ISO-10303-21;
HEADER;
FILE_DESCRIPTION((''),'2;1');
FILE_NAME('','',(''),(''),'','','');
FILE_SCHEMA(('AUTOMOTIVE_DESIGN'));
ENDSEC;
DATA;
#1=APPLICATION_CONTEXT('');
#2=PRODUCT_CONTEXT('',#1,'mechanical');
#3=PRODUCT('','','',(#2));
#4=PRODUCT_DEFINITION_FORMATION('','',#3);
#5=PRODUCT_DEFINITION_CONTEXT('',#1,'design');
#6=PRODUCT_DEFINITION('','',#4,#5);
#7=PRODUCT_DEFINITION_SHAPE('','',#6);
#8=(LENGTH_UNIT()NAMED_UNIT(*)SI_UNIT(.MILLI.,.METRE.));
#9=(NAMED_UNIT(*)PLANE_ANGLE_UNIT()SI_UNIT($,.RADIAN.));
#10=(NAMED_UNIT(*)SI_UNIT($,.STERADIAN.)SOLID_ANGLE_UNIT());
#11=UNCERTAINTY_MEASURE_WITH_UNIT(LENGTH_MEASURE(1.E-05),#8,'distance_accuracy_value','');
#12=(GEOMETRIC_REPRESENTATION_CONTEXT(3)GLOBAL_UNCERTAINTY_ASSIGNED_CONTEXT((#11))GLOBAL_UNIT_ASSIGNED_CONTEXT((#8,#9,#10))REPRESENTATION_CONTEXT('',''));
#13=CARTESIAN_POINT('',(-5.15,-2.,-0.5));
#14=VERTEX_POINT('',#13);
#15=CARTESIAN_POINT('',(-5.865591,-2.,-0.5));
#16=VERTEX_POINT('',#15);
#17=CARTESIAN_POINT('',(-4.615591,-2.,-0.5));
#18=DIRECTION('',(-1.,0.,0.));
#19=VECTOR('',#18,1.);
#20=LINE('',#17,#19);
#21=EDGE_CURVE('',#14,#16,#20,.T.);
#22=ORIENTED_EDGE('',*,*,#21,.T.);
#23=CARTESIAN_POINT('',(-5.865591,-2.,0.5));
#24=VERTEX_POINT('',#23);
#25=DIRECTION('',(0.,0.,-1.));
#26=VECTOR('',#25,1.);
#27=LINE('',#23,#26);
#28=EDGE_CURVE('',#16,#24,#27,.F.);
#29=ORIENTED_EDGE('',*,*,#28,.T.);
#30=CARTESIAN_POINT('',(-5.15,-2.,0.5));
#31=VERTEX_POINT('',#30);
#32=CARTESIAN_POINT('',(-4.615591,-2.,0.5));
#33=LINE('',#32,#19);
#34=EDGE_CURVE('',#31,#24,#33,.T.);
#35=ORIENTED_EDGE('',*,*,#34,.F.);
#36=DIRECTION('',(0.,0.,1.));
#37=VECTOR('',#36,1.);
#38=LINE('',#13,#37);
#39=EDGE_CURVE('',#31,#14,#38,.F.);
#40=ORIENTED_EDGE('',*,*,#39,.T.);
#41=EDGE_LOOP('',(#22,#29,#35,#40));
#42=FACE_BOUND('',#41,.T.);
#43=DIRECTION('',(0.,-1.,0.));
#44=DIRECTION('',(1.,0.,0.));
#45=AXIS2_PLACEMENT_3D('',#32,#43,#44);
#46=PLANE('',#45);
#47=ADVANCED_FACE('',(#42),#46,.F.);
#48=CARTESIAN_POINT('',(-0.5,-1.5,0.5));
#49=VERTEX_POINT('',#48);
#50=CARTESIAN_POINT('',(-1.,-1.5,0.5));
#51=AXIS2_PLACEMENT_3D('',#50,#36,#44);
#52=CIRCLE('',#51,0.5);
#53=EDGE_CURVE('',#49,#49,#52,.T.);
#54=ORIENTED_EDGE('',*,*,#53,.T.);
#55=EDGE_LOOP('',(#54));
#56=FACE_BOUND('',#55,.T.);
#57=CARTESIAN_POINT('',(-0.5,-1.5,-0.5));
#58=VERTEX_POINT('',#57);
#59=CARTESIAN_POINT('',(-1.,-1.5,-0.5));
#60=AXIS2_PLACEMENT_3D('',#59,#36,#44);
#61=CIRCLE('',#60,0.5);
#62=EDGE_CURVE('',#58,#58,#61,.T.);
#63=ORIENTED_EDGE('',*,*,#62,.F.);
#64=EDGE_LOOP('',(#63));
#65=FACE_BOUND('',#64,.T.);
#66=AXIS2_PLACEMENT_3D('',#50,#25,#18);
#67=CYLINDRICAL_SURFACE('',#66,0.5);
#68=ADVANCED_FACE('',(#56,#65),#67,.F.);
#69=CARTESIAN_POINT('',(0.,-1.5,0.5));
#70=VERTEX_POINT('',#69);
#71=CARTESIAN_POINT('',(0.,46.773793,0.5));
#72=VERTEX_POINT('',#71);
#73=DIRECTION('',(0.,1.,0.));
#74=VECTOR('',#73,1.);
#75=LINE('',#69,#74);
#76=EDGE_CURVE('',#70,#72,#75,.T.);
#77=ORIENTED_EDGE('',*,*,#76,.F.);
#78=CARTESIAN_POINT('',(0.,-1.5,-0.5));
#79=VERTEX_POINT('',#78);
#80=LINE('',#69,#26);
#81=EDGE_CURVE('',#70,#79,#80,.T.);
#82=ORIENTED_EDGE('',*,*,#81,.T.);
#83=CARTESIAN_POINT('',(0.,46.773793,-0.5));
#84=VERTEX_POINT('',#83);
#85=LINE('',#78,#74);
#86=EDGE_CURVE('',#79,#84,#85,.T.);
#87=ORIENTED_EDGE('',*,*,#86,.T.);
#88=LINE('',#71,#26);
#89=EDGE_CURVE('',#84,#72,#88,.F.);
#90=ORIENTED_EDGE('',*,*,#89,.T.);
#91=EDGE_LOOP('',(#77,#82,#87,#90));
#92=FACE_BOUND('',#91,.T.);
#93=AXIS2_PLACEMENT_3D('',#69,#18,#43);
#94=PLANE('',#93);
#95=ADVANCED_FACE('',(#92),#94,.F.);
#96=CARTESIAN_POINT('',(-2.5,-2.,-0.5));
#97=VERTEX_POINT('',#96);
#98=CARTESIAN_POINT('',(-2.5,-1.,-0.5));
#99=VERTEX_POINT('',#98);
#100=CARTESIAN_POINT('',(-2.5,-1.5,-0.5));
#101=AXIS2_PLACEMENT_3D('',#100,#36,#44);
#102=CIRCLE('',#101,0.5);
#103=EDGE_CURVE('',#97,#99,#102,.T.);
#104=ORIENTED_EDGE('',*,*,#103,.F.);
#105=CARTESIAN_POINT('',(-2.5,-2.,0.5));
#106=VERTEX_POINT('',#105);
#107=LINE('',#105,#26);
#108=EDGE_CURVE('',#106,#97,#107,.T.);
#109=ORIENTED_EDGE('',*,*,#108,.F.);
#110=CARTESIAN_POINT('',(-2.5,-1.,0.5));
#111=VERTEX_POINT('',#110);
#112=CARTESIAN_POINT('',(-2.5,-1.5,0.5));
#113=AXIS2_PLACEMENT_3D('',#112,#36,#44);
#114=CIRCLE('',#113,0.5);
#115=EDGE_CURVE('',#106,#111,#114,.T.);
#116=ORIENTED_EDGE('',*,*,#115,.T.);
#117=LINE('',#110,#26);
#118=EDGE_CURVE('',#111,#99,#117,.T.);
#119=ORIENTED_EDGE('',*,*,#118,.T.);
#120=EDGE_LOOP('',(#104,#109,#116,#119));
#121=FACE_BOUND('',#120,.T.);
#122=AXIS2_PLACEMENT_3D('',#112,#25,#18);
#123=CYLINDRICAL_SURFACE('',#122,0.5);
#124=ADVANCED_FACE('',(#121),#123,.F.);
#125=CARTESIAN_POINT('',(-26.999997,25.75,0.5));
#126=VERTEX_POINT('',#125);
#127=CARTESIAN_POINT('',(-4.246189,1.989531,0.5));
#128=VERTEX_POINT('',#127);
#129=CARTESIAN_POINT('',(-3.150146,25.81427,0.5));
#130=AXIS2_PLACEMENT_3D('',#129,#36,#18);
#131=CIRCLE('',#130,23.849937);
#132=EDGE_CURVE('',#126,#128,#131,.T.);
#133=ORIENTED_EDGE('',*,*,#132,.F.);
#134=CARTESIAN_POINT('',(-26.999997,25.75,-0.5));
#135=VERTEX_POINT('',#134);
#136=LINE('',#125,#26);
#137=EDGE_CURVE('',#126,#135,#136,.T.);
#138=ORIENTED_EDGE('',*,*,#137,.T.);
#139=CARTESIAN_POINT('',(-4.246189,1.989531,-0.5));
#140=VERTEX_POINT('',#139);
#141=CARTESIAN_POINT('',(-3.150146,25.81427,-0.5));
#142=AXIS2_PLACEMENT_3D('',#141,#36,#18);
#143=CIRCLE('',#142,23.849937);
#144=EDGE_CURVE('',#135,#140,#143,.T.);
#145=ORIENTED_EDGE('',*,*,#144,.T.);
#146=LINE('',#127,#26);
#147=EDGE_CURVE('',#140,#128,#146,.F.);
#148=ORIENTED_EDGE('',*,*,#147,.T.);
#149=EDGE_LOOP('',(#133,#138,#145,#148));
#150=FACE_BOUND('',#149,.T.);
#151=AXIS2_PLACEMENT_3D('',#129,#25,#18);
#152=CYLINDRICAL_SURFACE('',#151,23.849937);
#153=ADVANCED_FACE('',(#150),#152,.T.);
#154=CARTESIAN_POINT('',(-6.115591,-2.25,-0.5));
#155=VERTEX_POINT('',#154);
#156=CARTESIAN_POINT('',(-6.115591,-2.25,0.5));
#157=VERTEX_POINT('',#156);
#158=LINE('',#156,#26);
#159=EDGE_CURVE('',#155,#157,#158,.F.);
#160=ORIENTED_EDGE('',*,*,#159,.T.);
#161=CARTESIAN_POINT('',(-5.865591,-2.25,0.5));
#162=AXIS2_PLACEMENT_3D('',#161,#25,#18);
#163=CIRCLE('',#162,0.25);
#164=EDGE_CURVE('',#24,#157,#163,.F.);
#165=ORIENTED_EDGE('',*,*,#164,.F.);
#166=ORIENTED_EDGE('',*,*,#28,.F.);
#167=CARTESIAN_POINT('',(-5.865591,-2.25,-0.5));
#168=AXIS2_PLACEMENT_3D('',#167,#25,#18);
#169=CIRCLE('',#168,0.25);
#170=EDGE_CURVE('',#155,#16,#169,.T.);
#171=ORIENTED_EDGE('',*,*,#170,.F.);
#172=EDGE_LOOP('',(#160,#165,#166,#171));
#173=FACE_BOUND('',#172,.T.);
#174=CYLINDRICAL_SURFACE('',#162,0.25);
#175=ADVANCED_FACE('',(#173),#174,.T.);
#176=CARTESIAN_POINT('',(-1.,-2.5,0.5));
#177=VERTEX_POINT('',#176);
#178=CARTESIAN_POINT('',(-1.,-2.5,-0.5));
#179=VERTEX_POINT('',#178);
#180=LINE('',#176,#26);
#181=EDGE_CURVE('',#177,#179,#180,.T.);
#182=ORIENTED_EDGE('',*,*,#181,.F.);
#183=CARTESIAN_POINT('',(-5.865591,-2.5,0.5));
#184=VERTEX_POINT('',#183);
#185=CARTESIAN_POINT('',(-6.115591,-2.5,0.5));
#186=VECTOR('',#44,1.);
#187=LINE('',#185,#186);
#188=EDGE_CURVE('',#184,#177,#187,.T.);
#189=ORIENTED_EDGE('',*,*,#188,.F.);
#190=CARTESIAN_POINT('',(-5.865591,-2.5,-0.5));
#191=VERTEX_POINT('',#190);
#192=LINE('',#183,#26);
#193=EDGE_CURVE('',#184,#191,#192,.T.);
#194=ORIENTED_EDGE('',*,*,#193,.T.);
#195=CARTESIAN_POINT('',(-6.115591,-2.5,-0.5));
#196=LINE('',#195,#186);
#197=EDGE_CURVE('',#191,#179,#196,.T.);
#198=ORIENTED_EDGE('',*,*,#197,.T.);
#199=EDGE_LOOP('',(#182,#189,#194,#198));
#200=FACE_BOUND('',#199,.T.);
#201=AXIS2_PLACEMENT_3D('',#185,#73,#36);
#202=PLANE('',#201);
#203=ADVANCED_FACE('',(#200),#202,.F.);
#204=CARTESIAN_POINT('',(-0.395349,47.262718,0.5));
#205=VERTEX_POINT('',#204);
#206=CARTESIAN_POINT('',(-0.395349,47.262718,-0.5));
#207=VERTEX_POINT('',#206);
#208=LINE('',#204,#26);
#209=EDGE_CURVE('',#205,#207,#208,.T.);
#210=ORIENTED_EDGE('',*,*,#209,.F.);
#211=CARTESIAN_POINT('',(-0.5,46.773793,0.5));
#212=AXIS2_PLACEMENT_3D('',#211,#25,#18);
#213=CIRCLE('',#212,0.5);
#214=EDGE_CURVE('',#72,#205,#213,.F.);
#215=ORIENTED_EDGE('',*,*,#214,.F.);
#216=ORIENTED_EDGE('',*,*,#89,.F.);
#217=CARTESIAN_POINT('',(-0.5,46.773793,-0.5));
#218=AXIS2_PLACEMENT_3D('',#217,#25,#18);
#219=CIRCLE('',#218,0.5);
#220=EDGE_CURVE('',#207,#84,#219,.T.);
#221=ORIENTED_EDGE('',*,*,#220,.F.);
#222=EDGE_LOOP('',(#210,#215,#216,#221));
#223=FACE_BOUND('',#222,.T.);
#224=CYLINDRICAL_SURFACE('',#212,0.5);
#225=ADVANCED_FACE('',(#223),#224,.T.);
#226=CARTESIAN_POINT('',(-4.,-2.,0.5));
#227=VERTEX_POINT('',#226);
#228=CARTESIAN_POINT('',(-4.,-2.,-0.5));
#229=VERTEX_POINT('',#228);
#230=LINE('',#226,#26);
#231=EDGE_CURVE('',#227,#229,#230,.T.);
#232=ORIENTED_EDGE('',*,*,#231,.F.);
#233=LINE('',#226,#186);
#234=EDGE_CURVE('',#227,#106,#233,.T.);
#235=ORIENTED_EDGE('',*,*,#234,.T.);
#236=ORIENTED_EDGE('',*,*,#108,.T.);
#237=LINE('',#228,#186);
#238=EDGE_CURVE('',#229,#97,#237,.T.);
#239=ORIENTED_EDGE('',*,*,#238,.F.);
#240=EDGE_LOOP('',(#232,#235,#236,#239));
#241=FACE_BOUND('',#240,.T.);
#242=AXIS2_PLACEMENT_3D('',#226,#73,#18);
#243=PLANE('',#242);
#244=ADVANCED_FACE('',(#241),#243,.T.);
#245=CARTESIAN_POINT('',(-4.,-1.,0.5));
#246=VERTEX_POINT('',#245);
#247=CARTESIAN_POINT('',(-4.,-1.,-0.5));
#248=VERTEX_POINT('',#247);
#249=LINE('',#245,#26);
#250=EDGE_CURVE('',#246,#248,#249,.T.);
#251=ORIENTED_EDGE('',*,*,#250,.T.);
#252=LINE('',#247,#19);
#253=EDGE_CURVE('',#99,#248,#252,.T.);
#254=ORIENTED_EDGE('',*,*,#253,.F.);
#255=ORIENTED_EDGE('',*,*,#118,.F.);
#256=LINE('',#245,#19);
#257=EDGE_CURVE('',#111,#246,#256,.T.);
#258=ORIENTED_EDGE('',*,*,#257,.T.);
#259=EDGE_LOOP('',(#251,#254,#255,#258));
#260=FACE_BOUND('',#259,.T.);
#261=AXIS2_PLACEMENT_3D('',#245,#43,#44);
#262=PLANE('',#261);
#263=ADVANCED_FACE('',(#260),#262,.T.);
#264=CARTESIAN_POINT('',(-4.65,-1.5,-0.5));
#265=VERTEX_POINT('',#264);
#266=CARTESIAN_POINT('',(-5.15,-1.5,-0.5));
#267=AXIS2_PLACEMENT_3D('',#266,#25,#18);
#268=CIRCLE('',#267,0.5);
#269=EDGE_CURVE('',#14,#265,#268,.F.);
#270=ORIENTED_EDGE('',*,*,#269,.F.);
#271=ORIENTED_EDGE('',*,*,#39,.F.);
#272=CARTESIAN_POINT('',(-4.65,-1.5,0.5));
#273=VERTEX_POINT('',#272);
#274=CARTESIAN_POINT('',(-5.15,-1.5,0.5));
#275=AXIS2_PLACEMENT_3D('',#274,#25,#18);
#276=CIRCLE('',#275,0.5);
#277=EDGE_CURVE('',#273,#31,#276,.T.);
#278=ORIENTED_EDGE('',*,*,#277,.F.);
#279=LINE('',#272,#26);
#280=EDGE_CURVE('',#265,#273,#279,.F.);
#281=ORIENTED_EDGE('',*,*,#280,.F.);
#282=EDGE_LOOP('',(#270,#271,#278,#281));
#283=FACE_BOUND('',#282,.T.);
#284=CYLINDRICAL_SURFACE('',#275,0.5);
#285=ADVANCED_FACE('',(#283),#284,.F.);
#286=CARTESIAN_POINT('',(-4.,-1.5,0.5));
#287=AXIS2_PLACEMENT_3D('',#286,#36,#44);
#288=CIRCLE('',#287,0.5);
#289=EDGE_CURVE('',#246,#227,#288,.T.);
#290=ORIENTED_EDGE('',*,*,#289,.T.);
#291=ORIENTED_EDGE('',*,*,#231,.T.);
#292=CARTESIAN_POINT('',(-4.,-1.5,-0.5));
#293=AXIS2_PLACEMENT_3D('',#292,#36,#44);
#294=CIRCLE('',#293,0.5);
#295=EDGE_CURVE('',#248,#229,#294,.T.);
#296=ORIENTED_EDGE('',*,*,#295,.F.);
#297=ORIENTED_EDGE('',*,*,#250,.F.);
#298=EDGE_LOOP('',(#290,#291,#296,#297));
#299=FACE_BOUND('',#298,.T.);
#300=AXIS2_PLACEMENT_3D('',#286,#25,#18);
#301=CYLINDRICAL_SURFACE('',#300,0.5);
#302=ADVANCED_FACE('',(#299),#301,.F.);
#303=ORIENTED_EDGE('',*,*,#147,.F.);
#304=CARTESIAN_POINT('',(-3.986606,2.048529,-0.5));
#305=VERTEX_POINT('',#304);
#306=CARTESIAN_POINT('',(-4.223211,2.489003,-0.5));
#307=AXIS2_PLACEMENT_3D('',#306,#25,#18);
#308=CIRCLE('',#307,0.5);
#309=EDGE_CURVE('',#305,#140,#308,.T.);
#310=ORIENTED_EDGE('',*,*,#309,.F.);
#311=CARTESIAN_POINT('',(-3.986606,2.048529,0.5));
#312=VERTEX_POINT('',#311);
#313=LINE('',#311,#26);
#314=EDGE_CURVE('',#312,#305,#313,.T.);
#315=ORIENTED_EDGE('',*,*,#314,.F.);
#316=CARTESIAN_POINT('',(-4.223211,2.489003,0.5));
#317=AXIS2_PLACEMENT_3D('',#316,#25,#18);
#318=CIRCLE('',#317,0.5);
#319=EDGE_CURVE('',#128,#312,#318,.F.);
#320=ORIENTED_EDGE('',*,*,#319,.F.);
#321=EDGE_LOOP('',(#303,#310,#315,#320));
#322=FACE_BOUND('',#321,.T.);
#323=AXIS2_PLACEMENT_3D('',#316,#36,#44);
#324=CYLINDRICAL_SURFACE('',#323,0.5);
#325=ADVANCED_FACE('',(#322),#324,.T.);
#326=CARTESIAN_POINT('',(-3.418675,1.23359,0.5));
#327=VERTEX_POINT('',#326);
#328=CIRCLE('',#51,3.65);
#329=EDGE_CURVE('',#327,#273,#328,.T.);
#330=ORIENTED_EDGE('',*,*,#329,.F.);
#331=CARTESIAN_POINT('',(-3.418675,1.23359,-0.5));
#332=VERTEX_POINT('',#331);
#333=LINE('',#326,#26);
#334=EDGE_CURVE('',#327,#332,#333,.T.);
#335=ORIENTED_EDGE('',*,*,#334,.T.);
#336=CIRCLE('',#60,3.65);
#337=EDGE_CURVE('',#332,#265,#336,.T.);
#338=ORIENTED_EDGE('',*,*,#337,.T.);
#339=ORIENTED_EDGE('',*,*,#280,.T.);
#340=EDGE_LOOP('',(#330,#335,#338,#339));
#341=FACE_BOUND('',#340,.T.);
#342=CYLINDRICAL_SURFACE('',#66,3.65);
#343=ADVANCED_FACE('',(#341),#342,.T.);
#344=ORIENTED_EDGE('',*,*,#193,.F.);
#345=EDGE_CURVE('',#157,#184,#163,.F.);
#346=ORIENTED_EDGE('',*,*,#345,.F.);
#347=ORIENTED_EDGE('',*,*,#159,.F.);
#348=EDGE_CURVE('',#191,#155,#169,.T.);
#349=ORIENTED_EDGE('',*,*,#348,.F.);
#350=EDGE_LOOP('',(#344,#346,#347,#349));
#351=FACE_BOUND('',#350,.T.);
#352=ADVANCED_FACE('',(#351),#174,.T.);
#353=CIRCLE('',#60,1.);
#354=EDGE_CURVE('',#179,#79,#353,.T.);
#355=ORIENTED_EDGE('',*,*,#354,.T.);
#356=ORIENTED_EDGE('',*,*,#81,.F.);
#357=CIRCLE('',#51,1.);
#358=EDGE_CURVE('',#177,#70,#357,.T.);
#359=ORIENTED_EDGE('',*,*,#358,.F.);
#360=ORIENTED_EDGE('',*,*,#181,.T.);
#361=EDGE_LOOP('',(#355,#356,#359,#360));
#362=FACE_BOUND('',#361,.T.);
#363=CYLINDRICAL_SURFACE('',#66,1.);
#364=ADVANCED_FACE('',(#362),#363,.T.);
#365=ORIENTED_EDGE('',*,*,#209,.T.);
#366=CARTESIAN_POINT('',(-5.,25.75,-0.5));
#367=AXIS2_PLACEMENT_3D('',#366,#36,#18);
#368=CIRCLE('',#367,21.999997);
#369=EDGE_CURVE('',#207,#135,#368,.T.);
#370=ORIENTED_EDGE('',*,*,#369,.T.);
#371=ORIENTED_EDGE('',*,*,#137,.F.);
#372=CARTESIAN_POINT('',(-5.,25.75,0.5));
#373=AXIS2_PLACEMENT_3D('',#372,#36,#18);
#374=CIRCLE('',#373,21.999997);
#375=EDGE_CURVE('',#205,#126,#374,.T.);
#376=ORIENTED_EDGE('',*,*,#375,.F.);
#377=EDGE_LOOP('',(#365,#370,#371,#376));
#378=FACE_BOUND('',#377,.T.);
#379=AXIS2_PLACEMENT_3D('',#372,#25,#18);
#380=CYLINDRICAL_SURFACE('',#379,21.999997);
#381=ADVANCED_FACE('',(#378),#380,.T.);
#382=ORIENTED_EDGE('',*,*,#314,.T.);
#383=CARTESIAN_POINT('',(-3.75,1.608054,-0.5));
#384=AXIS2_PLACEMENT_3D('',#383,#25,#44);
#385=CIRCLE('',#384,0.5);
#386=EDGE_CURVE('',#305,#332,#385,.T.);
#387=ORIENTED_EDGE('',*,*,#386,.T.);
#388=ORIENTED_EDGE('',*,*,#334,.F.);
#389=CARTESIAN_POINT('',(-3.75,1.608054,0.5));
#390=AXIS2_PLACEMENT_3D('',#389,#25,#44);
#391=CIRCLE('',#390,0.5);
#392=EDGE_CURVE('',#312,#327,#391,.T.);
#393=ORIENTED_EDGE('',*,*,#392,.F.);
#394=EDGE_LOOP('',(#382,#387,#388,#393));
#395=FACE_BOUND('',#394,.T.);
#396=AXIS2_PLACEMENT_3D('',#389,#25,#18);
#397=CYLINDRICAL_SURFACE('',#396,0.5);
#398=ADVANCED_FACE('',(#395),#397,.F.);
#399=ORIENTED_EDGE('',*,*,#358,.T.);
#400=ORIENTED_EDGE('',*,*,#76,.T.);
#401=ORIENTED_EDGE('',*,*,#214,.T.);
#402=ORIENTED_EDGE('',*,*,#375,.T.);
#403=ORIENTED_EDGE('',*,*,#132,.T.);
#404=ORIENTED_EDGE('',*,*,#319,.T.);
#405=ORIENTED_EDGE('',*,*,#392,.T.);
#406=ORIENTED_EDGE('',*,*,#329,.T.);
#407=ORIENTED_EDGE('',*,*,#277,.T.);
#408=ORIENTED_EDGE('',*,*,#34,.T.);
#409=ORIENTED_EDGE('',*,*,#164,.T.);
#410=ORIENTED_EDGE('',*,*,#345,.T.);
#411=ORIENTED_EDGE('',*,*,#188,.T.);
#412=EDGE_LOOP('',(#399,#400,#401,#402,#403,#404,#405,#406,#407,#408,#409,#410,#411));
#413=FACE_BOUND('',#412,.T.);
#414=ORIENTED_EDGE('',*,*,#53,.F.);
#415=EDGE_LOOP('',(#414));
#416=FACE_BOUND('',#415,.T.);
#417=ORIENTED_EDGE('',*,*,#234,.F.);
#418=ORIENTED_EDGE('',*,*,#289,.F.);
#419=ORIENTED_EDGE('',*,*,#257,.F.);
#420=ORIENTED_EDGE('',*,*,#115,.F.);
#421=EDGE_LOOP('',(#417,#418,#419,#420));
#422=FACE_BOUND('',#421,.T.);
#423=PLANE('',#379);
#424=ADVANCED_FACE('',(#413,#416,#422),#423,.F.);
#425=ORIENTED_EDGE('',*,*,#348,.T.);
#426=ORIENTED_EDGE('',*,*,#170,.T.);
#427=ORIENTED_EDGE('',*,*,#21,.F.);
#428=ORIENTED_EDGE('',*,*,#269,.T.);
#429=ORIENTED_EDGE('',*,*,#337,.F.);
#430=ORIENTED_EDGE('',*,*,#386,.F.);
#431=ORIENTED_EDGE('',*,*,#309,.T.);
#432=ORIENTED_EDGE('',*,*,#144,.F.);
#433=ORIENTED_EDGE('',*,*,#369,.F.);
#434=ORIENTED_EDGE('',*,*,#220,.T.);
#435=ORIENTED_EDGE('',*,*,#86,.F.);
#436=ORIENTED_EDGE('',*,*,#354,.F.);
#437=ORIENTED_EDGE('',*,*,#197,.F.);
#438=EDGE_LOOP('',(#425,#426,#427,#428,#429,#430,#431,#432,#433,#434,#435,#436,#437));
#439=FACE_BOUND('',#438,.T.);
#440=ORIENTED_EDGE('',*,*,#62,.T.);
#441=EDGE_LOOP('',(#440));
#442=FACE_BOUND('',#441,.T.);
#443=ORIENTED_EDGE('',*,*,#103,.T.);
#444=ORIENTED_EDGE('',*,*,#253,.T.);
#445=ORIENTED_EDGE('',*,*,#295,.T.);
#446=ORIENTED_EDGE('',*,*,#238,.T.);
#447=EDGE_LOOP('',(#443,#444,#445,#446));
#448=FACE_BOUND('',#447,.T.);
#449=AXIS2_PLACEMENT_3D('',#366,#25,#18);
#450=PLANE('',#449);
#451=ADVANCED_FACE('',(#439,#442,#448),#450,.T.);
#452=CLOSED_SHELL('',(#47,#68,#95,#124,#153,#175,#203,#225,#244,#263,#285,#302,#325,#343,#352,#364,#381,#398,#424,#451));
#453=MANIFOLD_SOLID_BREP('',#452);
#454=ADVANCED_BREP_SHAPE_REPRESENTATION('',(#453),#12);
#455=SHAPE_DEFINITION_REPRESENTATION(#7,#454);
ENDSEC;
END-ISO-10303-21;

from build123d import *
from OCP.BRepFilletAPI import BRepFilletAPI_MakeFillet

# Parameters (mm, degrees)
SKETCH2_R           = 0.5
BOSS_EXTRUDE1_DEPTH = 0.5
FILLET1_R           = 0.5
FILLET1_R_2         = 0.25


with BuildPart() as part:
    # Sketch2 → Boss-Extrude1 (new, symmetric)
    with BuildSketch(Plane.XY):
        with BuildLine():
            Line((0, -1.5), (0, 47.174281802))
            ThreePointArc((0, 47.174281802), (-18.674791912, 42.983685528), (-26.999996608, 25.75))
            ThreePointArc((-26.999996608, 25.75), (-20.318377061, 9.259170115), (-4.081325301, 1.982518397))
            ThreePointArc((-4.081325301, 1.982518397), (-3.375535656, 1.939379355), (-3.418674699, 1.23358971))
            ThreePointArc((-3.418674699, 1.23358971), (-4.423027454, -0.232962886), (-4.615591238, -2))
            Line((-4.615591238, -2), (-6.115591238, -2))
            Line((-6.115591238, -2), (-6.115591238, -2.5))
            Line((-6.115591238, -2.5), (-1, -2.5))
            ThreePointArc((-1, -2.5), (-0.292893219, -2.207106781), (0, -1.5))
        make_face()
        with Locations((-1, -1.5)):
            Circle(SKETCH2_R, mode=Mode.SUBTRACT)
        with BuildLine():
            Line((-4, -1), (-2.5, -1))
            ThreePointArc((-2.5, -1), (-2, -1.5), (-2.5, -2))
            Line((-2.5, -2), (-4, -2))
            ThreePointArc((-4, -2), (-4.5, -1.5), (-4, -1))
        make_face(mode=Mode.SUBTRACT)
    extrude(amount=BOSS_EXTRUDE1_DEPTH, both=True)

    # Fillet1
    fillet1_edges_1 = [part.edges().sort_by_distance(p)[0] for p in [
        (-4.081325301, 1.982518397, 0),
        (-4.615591238, -2, 0),
        (0, 47.174281802, 0),
    ]]
    fillet1_edges_2 = [part.edges().sort_by_distance(p)[0] for p in [
        (-6.115591238, -2.5, 0),
        (-6.115591238, -2, 0),
    ]]
    fillet1 = BRepFilletAPI_MakeFillet(part.part.solid().wrapped)
    for e in fillet1_edges_1:
        fillet1.Add(FILLET1_R - 0.0001, e.wrapped)
    for e in fillet1_edges_2:
        fillet1.Add(FILLET1_R_2 - 0.0001, e.wrapped)
    add(Compound.cast(fillet1.Shape()), mode=Mode.REPLACE)  # a hair under: the kernel refuses the full size


solid = part.part
